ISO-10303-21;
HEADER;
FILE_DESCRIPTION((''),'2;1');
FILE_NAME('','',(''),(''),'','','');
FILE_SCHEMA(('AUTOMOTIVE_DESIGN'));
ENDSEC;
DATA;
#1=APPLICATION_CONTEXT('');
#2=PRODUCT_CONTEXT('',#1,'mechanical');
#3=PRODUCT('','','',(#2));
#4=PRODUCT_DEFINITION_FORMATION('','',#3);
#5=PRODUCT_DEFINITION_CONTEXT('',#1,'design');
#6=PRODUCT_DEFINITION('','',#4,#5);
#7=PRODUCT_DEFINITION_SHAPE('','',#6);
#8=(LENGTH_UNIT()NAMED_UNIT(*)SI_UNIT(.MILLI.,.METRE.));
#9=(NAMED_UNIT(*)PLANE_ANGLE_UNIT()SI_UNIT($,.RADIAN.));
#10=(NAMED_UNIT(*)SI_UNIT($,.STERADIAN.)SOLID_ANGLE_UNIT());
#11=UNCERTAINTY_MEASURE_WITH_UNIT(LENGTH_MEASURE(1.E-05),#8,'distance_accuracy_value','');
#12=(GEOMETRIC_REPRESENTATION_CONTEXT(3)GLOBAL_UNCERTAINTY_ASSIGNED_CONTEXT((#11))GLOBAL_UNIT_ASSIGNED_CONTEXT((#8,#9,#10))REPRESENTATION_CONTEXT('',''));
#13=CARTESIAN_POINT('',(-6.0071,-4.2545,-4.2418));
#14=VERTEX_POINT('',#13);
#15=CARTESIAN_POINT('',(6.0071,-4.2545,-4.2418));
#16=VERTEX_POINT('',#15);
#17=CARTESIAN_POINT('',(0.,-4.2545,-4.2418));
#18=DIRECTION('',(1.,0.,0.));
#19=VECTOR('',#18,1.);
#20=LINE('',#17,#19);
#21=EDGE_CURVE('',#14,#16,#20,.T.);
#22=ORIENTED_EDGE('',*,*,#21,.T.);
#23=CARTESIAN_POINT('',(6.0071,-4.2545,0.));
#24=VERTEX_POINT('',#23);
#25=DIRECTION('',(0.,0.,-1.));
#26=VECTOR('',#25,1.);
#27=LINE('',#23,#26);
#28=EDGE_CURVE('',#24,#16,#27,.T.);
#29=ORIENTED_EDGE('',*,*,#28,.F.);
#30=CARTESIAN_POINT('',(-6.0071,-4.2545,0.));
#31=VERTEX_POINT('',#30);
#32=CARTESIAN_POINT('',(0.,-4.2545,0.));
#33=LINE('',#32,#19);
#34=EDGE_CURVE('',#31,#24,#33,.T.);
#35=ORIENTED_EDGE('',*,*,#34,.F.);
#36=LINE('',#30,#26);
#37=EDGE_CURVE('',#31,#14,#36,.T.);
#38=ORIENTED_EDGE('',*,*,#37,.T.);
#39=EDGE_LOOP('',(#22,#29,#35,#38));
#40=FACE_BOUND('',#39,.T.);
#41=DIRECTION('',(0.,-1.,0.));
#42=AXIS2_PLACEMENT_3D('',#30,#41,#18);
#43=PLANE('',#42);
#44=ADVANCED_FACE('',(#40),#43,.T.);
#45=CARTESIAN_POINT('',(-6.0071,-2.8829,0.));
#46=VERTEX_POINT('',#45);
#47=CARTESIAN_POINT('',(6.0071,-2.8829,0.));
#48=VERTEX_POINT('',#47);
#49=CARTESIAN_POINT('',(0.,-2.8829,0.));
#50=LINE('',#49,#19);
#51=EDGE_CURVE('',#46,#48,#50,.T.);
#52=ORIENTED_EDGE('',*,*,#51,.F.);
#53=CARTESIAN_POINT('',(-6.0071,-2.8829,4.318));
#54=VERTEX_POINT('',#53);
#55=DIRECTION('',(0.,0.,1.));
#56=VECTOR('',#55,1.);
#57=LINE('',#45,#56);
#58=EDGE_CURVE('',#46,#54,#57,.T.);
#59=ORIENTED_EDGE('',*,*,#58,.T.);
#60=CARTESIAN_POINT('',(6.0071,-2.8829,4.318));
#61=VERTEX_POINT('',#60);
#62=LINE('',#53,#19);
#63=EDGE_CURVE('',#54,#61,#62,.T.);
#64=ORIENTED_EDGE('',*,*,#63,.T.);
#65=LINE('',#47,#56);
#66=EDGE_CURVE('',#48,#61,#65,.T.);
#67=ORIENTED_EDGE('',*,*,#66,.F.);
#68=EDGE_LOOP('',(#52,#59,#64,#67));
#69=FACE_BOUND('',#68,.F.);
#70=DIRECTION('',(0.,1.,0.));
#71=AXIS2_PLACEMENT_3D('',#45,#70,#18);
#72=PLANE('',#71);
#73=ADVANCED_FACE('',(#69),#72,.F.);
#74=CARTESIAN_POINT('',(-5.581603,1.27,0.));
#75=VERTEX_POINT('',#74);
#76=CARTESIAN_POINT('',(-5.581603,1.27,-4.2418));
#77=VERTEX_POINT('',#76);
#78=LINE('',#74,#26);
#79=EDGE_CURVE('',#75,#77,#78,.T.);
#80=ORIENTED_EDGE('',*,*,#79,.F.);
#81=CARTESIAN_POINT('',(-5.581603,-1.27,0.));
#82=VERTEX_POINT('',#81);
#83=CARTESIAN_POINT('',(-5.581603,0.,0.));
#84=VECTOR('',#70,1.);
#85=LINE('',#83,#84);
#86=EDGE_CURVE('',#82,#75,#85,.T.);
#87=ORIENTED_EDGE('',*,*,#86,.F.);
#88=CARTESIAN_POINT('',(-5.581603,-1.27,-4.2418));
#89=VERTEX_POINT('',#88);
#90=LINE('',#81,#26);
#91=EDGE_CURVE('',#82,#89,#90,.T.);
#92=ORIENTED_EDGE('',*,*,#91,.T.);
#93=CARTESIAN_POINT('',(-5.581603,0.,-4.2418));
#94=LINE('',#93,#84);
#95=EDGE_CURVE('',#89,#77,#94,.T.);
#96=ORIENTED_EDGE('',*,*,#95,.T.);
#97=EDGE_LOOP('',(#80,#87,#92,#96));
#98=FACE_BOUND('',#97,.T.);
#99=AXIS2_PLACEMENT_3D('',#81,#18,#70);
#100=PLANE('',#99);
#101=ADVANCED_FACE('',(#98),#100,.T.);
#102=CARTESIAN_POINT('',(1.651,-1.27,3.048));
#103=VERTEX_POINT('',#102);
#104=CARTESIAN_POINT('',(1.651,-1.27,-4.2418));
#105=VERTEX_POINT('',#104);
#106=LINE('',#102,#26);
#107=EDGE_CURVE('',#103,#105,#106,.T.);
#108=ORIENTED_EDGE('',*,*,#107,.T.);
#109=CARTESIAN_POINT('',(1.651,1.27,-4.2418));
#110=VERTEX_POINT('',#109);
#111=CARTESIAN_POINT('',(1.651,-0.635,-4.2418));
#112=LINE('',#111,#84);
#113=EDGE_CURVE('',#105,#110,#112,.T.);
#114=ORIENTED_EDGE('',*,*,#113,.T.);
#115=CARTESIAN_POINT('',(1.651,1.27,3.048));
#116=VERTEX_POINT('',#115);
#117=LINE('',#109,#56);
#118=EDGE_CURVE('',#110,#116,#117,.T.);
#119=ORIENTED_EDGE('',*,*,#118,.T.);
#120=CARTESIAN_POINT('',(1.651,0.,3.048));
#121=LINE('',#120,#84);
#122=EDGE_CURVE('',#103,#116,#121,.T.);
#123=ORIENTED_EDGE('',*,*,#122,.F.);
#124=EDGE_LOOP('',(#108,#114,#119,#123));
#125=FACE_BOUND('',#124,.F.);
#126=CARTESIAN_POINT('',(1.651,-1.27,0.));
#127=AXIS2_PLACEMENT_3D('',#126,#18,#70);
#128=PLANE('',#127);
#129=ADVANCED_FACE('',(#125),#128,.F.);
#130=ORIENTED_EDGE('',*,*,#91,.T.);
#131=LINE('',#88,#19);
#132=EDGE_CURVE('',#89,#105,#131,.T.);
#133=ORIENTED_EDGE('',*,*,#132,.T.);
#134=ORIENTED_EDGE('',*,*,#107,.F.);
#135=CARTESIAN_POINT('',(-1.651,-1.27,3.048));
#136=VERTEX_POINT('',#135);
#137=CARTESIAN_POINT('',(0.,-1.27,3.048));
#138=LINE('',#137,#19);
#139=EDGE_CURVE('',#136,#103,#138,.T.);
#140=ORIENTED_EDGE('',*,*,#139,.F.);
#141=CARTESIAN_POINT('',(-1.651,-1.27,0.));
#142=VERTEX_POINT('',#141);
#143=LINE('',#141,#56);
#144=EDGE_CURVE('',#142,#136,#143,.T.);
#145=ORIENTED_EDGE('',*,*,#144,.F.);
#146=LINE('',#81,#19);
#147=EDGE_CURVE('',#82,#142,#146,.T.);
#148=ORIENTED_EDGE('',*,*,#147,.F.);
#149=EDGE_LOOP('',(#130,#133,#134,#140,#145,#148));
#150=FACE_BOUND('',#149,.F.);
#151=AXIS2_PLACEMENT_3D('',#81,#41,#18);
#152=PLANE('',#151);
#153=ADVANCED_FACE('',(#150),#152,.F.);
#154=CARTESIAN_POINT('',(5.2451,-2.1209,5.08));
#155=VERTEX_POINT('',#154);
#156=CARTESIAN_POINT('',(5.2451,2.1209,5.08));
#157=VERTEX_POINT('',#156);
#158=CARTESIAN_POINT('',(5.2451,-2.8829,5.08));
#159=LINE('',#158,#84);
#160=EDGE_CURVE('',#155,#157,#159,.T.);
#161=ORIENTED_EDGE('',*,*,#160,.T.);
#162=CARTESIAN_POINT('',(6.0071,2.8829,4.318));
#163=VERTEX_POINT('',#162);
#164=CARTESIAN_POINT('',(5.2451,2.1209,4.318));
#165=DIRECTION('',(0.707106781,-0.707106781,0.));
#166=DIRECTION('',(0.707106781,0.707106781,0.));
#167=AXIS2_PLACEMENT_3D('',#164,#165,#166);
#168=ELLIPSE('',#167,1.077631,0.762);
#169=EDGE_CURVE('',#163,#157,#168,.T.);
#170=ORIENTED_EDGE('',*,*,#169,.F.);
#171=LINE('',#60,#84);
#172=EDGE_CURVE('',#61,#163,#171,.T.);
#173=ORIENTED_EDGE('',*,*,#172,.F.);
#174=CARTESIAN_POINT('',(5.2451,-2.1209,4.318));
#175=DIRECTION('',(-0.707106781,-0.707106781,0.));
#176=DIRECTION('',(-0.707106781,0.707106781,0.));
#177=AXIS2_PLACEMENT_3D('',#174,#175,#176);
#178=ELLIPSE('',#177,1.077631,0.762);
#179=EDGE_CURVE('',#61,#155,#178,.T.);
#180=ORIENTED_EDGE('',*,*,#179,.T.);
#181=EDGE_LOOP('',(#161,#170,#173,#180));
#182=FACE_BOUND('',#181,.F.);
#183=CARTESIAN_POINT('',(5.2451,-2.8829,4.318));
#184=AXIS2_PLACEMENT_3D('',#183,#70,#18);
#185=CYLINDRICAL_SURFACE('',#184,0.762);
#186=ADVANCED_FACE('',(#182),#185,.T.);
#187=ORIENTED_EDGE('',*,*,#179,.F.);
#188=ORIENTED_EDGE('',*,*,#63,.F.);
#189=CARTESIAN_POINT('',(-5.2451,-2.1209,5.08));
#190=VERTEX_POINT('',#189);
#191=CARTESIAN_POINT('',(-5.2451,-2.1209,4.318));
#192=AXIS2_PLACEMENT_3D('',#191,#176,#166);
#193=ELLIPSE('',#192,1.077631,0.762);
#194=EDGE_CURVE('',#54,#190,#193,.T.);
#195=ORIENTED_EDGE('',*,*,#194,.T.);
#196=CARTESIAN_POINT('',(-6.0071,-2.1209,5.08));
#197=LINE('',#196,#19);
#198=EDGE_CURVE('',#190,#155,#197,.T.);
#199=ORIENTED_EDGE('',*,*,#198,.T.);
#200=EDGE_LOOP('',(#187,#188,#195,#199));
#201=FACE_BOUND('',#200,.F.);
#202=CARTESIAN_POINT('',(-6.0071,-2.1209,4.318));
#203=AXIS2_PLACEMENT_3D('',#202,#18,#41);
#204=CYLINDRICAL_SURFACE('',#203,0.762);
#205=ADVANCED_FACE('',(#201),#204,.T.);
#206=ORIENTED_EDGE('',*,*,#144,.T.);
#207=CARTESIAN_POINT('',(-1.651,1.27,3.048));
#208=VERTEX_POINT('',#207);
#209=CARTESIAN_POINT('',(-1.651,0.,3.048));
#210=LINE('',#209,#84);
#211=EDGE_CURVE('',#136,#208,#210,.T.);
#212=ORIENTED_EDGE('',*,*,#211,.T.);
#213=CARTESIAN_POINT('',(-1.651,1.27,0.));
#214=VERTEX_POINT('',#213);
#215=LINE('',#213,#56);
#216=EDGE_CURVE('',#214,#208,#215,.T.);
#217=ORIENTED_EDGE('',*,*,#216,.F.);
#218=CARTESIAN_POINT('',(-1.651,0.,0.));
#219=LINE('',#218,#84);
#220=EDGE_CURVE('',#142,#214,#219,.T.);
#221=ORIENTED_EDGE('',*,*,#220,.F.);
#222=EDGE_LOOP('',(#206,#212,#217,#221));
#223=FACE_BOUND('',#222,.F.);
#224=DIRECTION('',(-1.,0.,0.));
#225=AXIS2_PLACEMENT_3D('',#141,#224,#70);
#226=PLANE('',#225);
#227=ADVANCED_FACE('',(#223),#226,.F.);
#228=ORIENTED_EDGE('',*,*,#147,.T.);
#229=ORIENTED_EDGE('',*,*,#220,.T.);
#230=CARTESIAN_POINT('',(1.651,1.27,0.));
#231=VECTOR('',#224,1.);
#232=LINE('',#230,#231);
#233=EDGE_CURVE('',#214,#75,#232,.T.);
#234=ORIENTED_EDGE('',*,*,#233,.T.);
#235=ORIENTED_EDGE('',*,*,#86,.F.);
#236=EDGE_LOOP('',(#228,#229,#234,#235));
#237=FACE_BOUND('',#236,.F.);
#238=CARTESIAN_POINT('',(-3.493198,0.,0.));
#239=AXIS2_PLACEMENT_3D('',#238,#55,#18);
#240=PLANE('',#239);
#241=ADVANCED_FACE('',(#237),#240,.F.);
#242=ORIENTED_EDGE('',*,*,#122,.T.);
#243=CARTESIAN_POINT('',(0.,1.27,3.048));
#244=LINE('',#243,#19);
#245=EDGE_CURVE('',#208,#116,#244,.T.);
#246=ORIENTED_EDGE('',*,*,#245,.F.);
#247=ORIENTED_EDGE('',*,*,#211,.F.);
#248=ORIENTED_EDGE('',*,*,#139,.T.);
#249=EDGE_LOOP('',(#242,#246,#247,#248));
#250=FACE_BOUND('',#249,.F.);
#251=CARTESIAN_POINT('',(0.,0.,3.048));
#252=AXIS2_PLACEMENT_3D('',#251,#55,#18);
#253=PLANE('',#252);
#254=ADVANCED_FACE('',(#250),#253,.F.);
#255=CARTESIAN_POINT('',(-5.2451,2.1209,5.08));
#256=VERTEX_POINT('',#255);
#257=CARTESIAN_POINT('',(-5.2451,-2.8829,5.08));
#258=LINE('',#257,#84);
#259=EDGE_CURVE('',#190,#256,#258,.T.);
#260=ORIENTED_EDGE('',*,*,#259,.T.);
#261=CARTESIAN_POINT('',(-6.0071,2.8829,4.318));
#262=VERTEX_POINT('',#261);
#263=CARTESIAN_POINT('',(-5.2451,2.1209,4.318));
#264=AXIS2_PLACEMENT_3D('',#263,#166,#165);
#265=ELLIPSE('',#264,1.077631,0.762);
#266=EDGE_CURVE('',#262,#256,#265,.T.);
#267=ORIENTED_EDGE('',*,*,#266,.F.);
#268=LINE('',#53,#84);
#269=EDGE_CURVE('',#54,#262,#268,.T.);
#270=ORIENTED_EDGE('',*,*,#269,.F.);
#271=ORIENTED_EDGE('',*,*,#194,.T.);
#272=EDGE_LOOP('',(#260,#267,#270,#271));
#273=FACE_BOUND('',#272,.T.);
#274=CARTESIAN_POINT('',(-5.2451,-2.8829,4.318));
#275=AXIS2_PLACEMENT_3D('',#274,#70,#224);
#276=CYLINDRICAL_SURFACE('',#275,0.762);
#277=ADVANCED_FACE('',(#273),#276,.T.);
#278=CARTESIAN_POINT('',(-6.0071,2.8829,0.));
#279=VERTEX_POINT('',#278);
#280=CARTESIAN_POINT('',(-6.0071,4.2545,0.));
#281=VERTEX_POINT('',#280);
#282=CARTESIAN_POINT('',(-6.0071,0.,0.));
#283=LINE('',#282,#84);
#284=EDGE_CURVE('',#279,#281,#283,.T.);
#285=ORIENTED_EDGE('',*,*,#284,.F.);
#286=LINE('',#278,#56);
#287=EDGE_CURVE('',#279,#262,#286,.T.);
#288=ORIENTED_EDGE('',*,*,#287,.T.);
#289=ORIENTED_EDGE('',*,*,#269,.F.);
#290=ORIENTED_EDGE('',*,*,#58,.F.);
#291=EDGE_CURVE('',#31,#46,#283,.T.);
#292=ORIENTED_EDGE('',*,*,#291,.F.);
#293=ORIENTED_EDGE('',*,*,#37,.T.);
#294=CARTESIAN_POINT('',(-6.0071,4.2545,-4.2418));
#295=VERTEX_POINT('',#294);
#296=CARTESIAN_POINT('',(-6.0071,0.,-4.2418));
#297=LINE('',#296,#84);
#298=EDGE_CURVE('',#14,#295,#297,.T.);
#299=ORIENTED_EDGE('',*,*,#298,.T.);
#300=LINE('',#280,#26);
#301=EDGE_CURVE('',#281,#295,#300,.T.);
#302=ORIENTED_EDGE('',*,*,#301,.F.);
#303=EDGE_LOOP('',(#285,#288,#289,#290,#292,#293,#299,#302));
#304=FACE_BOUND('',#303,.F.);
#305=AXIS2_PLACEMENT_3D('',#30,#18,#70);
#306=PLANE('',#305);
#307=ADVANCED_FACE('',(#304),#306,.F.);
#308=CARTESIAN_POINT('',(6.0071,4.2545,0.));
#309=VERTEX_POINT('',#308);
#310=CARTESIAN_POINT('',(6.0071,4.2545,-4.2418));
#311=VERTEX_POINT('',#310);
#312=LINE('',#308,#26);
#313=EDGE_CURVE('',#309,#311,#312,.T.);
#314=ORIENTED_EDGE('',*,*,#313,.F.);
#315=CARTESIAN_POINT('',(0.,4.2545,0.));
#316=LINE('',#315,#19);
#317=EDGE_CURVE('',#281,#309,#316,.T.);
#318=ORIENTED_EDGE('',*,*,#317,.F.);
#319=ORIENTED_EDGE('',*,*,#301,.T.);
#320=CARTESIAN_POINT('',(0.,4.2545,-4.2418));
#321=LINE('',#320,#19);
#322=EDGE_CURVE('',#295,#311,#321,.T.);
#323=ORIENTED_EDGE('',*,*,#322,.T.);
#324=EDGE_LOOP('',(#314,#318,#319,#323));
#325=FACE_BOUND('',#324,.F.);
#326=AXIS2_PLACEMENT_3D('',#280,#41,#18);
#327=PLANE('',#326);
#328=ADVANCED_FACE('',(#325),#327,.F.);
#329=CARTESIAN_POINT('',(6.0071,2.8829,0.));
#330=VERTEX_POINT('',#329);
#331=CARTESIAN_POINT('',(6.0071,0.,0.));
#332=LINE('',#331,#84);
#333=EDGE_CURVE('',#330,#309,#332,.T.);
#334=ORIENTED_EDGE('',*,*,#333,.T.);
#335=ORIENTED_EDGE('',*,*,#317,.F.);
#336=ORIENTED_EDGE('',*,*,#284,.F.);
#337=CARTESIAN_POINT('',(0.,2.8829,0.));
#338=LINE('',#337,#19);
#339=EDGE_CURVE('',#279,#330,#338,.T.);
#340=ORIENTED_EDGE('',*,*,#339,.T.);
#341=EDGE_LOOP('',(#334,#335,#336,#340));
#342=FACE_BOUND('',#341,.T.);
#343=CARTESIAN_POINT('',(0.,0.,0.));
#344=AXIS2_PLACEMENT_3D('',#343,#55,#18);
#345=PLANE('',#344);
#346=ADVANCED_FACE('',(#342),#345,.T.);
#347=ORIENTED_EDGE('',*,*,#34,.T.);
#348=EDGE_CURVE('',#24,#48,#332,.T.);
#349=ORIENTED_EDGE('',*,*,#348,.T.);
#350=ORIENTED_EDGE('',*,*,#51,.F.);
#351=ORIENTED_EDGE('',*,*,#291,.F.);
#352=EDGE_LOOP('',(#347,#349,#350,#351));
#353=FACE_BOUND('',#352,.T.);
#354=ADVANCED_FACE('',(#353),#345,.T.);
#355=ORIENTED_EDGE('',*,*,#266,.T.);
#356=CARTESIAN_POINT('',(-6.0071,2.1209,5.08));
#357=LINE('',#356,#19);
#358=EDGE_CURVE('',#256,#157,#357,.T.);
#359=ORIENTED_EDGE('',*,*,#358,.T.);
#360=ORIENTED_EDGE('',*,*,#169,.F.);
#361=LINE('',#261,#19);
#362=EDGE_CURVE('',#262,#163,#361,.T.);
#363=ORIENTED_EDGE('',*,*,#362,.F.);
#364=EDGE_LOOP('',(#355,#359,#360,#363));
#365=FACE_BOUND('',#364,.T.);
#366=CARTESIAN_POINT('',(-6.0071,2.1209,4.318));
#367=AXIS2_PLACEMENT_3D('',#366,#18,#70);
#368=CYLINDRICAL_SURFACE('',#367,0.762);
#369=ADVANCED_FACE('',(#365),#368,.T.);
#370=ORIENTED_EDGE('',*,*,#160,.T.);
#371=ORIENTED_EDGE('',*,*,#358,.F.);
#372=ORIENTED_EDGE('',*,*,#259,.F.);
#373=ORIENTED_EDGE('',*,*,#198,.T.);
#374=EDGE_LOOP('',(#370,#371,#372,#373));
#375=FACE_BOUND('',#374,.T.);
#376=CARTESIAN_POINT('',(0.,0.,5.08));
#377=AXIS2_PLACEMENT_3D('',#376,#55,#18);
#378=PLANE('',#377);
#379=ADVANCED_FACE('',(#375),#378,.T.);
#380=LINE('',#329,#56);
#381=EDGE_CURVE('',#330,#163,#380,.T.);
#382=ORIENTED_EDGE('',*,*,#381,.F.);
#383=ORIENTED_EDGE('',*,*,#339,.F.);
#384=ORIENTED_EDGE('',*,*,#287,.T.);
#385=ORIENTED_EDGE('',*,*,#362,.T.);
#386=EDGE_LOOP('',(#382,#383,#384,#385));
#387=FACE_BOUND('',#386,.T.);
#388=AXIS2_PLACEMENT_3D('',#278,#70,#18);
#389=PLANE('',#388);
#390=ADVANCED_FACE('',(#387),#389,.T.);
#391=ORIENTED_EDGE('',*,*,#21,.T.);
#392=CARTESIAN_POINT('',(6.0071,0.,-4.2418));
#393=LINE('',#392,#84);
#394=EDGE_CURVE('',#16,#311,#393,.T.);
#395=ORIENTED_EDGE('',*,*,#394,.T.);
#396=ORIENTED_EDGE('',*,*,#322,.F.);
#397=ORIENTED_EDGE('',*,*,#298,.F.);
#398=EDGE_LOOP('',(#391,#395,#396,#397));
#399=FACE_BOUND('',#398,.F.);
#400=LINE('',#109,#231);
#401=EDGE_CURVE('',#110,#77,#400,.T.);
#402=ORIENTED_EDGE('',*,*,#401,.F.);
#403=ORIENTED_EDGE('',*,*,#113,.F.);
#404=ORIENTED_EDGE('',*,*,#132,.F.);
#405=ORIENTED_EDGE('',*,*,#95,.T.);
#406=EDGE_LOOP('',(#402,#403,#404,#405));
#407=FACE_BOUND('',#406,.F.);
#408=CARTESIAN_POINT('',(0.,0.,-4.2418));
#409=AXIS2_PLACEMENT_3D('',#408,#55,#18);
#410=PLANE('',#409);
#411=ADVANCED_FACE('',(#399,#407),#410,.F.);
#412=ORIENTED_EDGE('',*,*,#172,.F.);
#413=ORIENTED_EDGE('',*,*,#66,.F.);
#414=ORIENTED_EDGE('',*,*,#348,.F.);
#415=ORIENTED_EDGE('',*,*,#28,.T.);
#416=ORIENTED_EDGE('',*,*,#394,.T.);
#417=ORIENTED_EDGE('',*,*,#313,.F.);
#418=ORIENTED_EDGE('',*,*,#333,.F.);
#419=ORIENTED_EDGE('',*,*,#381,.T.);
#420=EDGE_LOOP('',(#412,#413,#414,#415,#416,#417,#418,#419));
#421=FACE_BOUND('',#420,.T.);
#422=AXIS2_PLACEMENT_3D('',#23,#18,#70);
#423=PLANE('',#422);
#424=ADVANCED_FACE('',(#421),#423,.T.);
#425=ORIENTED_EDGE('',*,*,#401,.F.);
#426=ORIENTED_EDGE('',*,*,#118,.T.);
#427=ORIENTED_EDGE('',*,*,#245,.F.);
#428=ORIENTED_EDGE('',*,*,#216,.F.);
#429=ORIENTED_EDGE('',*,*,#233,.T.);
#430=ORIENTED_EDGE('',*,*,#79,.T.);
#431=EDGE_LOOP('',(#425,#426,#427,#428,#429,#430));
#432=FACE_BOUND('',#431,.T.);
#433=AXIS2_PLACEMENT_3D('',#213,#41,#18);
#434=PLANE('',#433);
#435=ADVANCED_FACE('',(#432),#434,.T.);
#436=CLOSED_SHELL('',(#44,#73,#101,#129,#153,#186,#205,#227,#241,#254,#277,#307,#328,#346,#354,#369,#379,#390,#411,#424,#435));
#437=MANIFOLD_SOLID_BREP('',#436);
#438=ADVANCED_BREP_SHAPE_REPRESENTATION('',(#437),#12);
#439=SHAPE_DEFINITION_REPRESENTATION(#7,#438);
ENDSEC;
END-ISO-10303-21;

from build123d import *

# Parameters (mm, degrees)
F0_W          = 12.0142
F0_H          = 5.7658
F1_DEPTH      = 5.08
F2_W          = 12.0142
F2_H          = 8.509
F3_DEPTH      = 4.2418
F4_R          = 0.762
F6_W          = 4.1768109557
F6_H          = 2.54
F7_DEPTH      = 4.2418
F5_W          = 3.302
F5_H          = 2.54
F8_DEPTH      = 4.318
F8_DEPTH_BACK = 3.048


with BuildPart() as f1:
    # F0 (on Top) → F1 (new body)
    with BuildSketch(Plane.XY):
        Rectangle(F0_W, F0_H)
    extrude(amount=F1_DEPTH)

    # F2 (on Top) → F3 (join)
    with BuildSketch(Plane.XY):
        Rectangle(F2_W, F2_H)
    extrude(amount=-F3_DEPTH)

    # F4
    f4_edges = [f1.edges().sort_by_distance(p)[0] for p in [
        (6.0071, 0, 5.08),
        (0, 2.8829, 5.08),
        (-6.0071, 0, 5.08),
        (0, -2.8829, 5.08),
    ]]
    fillet(f4_edges, radius=F4_R)

    # F6 (on Top) → F7 (cut)
    with BuildSketch(Plane.XY):
        with Locations((-3.4931976115, 0)):
            Rectangle(F6_W, F6_H)
    extrude(amount=-F7_DEPTH, mode=Mode.SUBTRACT)

    # F5 (on Top) → F8 (cut, two sides)
    with BuildSketch(Plane.XY) as f8_sk:
        Rectangle(F5_W, F5_H)
    extrude(amount=-F8_DEPTH, mode=Mode.SUBTRACT)
    extrude(f8_sk.sketch, amount=F8_DEPTH_BACK, mode=Mode.SUBTRACT)


solid = f1.part
